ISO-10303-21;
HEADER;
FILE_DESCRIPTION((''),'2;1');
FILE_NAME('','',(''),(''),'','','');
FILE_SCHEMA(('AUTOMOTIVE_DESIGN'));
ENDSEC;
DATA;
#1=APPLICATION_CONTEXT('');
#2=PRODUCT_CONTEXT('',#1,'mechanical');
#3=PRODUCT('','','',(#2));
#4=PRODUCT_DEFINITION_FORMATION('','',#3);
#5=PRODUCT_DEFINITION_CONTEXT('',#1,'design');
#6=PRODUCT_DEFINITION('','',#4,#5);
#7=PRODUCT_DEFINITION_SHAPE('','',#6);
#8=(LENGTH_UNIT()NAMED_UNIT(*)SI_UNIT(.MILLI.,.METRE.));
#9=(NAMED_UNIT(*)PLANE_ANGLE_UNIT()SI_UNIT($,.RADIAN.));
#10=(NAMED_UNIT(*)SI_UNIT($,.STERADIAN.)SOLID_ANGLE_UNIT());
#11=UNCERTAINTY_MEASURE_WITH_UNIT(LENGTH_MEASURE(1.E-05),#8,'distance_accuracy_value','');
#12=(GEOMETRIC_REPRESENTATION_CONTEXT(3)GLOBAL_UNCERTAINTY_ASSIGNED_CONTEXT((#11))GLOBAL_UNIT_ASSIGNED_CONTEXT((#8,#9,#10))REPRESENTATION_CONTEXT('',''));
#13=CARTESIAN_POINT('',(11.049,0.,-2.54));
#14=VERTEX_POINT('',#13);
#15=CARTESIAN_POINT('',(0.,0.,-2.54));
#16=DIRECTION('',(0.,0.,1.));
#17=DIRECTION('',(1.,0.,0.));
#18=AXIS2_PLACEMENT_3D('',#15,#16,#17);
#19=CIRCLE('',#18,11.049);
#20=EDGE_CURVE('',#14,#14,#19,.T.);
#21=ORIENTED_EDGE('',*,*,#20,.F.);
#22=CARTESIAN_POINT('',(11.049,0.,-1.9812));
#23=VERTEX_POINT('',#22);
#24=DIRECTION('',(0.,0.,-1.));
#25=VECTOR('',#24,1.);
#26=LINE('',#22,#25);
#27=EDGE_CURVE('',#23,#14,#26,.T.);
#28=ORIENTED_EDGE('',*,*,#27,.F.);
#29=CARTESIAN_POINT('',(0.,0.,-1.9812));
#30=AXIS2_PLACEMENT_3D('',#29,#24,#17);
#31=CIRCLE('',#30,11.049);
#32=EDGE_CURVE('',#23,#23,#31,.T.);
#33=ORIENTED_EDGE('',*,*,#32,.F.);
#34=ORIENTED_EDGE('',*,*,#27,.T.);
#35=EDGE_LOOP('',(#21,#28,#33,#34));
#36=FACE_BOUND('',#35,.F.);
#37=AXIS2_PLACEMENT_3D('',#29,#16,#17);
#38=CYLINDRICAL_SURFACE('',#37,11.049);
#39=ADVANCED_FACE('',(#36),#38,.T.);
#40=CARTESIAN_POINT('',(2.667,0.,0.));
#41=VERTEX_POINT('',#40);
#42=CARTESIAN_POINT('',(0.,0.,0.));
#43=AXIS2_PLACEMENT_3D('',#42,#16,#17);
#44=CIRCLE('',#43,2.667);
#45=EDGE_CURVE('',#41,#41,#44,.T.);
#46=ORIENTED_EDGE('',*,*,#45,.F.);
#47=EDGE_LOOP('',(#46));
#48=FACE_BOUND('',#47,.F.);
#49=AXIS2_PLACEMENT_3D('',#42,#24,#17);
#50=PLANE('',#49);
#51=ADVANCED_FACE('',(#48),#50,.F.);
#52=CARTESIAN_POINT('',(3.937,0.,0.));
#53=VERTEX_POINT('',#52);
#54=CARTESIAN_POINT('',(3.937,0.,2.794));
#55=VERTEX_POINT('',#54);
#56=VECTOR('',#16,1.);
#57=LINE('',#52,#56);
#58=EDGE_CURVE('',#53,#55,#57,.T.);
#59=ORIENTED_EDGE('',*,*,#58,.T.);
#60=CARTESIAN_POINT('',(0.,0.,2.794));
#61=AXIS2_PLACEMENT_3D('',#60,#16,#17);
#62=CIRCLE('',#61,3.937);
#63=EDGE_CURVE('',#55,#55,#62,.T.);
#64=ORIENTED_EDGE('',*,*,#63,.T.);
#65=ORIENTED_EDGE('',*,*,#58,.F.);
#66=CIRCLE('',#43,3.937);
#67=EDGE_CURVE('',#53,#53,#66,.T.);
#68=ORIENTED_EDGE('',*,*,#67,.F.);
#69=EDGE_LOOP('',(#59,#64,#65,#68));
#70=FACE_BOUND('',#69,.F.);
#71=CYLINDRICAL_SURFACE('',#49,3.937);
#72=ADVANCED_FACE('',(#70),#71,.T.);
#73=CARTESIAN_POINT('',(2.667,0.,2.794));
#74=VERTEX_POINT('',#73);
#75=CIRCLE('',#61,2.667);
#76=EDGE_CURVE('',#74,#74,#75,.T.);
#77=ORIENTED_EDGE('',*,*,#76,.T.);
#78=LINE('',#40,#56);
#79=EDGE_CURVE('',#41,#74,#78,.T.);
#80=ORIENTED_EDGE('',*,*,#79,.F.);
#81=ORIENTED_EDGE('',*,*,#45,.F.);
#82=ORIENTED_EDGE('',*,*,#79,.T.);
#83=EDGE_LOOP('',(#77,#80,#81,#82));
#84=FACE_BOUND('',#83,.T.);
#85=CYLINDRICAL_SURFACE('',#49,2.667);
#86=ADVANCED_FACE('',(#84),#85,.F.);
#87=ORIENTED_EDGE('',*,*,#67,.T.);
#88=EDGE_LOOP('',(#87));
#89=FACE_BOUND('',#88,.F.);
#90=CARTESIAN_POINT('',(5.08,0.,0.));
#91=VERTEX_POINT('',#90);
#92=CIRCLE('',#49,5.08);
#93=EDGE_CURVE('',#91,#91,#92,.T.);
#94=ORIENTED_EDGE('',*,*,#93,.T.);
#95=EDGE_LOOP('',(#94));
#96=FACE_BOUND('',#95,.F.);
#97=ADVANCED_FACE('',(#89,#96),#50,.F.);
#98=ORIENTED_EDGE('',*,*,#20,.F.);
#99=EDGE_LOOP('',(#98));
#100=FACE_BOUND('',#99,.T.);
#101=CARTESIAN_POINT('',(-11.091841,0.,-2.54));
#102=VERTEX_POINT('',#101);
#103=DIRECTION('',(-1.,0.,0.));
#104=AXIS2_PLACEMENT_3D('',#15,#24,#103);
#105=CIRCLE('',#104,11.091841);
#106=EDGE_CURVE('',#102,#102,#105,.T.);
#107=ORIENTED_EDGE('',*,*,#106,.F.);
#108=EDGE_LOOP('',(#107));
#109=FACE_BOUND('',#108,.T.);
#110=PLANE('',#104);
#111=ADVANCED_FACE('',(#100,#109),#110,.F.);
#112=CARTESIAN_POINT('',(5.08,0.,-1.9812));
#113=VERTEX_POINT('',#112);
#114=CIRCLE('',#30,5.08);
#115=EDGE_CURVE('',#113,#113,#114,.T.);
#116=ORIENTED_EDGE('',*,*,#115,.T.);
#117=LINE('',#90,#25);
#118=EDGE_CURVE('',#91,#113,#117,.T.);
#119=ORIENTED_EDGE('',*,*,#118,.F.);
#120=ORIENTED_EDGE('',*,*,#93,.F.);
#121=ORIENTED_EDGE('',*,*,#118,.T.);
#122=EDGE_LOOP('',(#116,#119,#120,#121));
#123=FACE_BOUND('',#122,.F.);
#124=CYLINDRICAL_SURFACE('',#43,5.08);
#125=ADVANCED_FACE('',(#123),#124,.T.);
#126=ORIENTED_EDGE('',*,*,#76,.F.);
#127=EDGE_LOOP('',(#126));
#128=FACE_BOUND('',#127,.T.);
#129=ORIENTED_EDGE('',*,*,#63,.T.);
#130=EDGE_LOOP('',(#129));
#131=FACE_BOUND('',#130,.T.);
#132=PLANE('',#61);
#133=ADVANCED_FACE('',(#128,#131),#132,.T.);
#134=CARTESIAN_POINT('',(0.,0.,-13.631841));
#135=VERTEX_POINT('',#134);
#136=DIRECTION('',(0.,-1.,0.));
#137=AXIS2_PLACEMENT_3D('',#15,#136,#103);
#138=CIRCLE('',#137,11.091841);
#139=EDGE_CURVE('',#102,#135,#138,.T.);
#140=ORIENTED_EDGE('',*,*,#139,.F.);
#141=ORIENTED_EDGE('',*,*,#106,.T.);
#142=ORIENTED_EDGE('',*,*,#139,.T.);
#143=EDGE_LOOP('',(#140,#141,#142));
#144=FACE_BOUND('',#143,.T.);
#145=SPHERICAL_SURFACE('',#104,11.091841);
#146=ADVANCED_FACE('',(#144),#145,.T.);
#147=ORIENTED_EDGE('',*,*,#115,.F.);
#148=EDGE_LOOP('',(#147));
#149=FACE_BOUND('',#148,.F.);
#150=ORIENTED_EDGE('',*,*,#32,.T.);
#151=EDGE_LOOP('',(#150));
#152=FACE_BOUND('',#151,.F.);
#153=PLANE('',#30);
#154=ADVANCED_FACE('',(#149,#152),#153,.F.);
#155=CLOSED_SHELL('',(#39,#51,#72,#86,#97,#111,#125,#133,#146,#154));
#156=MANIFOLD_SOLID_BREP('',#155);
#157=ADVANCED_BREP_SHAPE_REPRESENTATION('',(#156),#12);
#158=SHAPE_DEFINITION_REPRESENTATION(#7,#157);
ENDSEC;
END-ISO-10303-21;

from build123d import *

# Parameters (mm, degrees)
F0_R     = 3.937
F0_R_2   = 2.667
F1_DEPTH = 2.794
F2_R     = 5.08
F3_DEPTH = 1.9812
F4_R     = 11.049
F5_DEPTH = 1.524


# Not quite as in the source:
# - a feature names something its author has since deleted; it is built from what else it names


with BuildPart() as f1:
    # F0 (on Top) → F1 (new body)
    with BuildSketch(Plane.XY):
        Circle(F0_R)
        Circle(F0_R_2, mode=Mode.SUBTRACT)
    extrude(amount=F1_DEPTH)

    # F2 (on face) → F3 (join)
    with BuildSketch(Plane(origin=(0, 0, 0), x_dir=(1, 0, 0), z_dir=(0, 0, -1))):
        Circle(F2_R)
    extrude(amount=F3_DEPTH)

    # F4 (on face) → F5 (join)
    with BuildSketch(Plane(origin=(0, 0, -1.9812), x_dir=(1, 0, 0), z_dir=(0, 0, -1))):
        Circle(F4_R)
    extrude(amount=F5_DEPTH)

    # F6 (on Front) → F7 (revolve)
    with BuildSketch(Plane.XZ):
        with BuildLine():
            Line((0, -2.54), (-11.09184091, -2.54))
            ThreePointArc((-11.09184091, -2.54), (-7.8431159233, -10.3831159233), (0, -13.63184091))
            Line((0, -13.63184091), (0, -3.5557490773))
            Line((0, -3.5557490773), (0, -2.54))
        make_face()
    revolve(axis=Axis((0, 0, -8.5937949937), (0, 0, -1)))


solid = f1.part
